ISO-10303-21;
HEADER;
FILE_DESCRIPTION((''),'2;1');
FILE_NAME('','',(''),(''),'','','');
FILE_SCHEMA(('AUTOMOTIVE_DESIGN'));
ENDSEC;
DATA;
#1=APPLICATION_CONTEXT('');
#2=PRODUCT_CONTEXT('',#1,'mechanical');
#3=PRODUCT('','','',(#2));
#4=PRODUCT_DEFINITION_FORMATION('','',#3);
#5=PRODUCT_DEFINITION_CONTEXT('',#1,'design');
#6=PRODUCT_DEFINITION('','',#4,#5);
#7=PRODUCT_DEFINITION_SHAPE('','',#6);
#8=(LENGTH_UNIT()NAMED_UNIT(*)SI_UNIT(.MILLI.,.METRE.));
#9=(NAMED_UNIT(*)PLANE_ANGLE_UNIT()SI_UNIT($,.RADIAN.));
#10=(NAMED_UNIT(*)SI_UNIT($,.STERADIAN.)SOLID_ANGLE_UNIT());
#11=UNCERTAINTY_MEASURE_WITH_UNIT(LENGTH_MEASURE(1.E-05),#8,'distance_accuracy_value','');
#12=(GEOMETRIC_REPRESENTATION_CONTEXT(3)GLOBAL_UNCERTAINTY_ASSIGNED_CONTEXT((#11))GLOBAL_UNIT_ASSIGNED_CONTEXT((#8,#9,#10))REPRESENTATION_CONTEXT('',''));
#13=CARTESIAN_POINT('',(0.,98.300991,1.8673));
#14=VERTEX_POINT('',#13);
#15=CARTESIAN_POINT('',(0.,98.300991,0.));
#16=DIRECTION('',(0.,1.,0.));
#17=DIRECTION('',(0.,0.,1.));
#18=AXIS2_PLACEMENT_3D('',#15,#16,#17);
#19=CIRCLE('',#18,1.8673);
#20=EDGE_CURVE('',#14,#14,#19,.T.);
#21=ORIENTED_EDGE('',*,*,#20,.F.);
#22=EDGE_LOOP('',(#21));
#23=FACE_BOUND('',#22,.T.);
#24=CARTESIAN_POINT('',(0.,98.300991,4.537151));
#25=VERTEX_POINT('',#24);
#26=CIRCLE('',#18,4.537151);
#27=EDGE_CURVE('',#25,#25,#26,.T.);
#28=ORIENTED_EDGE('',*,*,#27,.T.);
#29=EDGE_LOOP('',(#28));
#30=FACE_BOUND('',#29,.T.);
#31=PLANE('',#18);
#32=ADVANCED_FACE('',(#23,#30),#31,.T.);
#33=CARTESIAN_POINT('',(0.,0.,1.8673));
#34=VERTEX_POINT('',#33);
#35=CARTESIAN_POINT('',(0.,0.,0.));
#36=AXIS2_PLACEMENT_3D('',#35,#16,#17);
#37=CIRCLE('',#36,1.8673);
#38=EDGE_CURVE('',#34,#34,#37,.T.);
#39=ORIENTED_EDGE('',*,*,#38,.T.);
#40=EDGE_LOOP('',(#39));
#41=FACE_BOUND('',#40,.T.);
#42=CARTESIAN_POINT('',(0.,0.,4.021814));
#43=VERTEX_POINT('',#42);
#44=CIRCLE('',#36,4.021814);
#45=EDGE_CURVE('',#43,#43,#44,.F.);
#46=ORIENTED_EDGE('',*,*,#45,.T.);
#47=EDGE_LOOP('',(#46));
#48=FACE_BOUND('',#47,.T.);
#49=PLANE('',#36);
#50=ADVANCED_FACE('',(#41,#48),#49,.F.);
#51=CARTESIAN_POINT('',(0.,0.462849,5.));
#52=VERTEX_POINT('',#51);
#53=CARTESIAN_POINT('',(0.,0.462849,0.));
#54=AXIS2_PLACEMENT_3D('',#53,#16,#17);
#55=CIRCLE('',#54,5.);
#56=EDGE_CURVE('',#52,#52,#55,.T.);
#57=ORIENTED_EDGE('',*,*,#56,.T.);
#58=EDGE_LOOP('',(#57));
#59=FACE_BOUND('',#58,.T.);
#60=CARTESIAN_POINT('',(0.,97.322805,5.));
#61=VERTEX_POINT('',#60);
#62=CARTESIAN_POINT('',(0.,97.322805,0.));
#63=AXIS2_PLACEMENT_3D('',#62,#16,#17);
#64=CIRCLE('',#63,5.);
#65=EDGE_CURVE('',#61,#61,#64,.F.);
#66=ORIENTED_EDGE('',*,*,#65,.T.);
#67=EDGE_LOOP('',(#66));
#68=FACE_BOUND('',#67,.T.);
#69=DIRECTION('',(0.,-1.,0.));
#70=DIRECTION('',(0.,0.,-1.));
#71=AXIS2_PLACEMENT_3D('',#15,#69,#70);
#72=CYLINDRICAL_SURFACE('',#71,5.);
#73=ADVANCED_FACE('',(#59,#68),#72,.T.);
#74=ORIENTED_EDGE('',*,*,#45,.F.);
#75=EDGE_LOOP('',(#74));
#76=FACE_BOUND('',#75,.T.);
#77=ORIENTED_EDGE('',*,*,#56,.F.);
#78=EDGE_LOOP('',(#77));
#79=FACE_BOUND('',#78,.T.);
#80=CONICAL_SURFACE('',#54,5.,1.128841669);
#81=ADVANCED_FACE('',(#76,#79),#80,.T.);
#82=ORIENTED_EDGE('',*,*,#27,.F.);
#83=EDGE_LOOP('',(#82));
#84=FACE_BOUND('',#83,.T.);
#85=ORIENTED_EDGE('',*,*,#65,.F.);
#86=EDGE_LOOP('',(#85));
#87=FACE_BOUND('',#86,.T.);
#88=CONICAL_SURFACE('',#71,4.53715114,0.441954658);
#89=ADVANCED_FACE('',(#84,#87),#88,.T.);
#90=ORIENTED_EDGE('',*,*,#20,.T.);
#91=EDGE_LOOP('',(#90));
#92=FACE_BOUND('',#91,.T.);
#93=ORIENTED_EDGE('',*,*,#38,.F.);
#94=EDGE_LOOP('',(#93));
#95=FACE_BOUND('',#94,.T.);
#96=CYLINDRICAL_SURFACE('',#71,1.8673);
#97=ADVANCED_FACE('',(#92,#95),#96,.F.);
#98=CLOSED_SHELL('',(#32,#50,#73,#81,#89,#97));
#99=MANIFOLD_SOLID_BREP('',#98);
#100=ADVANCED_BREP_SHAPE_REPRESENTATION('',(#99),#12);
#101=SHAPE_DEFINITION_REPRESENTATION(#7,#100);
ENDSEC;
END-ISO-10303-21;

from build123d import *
from OCP.BRepFilletAPI import BRepFilletAPI_MakeChamfer

# Parameters (mm, degrees)
SKETCH1_R           = 5
BOSS_EXTRUDE1_DEPTH = 98.30099098
SKETCH2_R           = 1.86729965
CUT_EXTRUDE1_DEPTH  = 99.554983779
CHAMFER1_SIZE       = 0.978185993
CHAMFER1_SIZE2      = 0.46284886


with BuildPart() as part:
    # Sketch1 → Boss-Extrude1 (new body)
    with BuildSketch(Plane(origin=(0, 0, 0), x_dir=(1, 0, 0), z_dir=(0, 1, 0))):
        Circle(SKETCH1_R)
    extrude(amount=BOSS_EXTRUDE1_DEPTH)

    # Sketch2 → Cut-Extrude1 (cut, through all)
    with BuildSketch(Plane(origin=(0, 0, 0), x_dir=(1, 0, 0), z_dir=(0, 1, 0))):
        Circle(SKETCH2_R)
    extrude(amount=CUT_EXTRUDE1_DEPTH, mode=Mode.SUBTRACT)

    # Chamfer1: one chamfer whose edges measure the first distance from different faces: ONE call of the kernel's chamfer builder (chamfer() names one face for all edges)
    chamfer1_edges_1 = [part.edges().sort_by_distance(p)[0] for p in [
        (-5, 98.30099098, 0),
    ]]
    chamfer1_side_1 = [part.faces().sort_by_distance(p)[0] for p in [
        (-5, 49.15049549, 0),
    ]]
    chamfer1_edges_2 = [part.edges().sort_by_distance(p)[0] for p in [
        (-5, 0, 0),
    ]]
    chamfer1_side_2 = [part.faces().sort_by_distance(p)[0] for p in [
        (-4.858578644, 0, 0),
    ]]
    chamfer1 = BRepFilletAPI_MakeChamfer(part.part.solid().wrapped)
    for e in chamfer1_edges_1:
        chamfer1.Add(CHAMFER1_SIZE, CHAMFER1_SIZE2, e.wrapped, chamfer1_side_1[0].wrapped)  # the first distance lies on this face
    for e in chamfer1_edges_2:
        chamfer1.Add(CHAMFER1_SIZE, CHAMFER1_SIZE2, e.wrapped, chamfer1_side_2[0].wrapped)  # the first distance lies on this face
    add(Compound.cast(chamfer1.Shape()), mode=Mode.REPLACE)


solid = part.part
